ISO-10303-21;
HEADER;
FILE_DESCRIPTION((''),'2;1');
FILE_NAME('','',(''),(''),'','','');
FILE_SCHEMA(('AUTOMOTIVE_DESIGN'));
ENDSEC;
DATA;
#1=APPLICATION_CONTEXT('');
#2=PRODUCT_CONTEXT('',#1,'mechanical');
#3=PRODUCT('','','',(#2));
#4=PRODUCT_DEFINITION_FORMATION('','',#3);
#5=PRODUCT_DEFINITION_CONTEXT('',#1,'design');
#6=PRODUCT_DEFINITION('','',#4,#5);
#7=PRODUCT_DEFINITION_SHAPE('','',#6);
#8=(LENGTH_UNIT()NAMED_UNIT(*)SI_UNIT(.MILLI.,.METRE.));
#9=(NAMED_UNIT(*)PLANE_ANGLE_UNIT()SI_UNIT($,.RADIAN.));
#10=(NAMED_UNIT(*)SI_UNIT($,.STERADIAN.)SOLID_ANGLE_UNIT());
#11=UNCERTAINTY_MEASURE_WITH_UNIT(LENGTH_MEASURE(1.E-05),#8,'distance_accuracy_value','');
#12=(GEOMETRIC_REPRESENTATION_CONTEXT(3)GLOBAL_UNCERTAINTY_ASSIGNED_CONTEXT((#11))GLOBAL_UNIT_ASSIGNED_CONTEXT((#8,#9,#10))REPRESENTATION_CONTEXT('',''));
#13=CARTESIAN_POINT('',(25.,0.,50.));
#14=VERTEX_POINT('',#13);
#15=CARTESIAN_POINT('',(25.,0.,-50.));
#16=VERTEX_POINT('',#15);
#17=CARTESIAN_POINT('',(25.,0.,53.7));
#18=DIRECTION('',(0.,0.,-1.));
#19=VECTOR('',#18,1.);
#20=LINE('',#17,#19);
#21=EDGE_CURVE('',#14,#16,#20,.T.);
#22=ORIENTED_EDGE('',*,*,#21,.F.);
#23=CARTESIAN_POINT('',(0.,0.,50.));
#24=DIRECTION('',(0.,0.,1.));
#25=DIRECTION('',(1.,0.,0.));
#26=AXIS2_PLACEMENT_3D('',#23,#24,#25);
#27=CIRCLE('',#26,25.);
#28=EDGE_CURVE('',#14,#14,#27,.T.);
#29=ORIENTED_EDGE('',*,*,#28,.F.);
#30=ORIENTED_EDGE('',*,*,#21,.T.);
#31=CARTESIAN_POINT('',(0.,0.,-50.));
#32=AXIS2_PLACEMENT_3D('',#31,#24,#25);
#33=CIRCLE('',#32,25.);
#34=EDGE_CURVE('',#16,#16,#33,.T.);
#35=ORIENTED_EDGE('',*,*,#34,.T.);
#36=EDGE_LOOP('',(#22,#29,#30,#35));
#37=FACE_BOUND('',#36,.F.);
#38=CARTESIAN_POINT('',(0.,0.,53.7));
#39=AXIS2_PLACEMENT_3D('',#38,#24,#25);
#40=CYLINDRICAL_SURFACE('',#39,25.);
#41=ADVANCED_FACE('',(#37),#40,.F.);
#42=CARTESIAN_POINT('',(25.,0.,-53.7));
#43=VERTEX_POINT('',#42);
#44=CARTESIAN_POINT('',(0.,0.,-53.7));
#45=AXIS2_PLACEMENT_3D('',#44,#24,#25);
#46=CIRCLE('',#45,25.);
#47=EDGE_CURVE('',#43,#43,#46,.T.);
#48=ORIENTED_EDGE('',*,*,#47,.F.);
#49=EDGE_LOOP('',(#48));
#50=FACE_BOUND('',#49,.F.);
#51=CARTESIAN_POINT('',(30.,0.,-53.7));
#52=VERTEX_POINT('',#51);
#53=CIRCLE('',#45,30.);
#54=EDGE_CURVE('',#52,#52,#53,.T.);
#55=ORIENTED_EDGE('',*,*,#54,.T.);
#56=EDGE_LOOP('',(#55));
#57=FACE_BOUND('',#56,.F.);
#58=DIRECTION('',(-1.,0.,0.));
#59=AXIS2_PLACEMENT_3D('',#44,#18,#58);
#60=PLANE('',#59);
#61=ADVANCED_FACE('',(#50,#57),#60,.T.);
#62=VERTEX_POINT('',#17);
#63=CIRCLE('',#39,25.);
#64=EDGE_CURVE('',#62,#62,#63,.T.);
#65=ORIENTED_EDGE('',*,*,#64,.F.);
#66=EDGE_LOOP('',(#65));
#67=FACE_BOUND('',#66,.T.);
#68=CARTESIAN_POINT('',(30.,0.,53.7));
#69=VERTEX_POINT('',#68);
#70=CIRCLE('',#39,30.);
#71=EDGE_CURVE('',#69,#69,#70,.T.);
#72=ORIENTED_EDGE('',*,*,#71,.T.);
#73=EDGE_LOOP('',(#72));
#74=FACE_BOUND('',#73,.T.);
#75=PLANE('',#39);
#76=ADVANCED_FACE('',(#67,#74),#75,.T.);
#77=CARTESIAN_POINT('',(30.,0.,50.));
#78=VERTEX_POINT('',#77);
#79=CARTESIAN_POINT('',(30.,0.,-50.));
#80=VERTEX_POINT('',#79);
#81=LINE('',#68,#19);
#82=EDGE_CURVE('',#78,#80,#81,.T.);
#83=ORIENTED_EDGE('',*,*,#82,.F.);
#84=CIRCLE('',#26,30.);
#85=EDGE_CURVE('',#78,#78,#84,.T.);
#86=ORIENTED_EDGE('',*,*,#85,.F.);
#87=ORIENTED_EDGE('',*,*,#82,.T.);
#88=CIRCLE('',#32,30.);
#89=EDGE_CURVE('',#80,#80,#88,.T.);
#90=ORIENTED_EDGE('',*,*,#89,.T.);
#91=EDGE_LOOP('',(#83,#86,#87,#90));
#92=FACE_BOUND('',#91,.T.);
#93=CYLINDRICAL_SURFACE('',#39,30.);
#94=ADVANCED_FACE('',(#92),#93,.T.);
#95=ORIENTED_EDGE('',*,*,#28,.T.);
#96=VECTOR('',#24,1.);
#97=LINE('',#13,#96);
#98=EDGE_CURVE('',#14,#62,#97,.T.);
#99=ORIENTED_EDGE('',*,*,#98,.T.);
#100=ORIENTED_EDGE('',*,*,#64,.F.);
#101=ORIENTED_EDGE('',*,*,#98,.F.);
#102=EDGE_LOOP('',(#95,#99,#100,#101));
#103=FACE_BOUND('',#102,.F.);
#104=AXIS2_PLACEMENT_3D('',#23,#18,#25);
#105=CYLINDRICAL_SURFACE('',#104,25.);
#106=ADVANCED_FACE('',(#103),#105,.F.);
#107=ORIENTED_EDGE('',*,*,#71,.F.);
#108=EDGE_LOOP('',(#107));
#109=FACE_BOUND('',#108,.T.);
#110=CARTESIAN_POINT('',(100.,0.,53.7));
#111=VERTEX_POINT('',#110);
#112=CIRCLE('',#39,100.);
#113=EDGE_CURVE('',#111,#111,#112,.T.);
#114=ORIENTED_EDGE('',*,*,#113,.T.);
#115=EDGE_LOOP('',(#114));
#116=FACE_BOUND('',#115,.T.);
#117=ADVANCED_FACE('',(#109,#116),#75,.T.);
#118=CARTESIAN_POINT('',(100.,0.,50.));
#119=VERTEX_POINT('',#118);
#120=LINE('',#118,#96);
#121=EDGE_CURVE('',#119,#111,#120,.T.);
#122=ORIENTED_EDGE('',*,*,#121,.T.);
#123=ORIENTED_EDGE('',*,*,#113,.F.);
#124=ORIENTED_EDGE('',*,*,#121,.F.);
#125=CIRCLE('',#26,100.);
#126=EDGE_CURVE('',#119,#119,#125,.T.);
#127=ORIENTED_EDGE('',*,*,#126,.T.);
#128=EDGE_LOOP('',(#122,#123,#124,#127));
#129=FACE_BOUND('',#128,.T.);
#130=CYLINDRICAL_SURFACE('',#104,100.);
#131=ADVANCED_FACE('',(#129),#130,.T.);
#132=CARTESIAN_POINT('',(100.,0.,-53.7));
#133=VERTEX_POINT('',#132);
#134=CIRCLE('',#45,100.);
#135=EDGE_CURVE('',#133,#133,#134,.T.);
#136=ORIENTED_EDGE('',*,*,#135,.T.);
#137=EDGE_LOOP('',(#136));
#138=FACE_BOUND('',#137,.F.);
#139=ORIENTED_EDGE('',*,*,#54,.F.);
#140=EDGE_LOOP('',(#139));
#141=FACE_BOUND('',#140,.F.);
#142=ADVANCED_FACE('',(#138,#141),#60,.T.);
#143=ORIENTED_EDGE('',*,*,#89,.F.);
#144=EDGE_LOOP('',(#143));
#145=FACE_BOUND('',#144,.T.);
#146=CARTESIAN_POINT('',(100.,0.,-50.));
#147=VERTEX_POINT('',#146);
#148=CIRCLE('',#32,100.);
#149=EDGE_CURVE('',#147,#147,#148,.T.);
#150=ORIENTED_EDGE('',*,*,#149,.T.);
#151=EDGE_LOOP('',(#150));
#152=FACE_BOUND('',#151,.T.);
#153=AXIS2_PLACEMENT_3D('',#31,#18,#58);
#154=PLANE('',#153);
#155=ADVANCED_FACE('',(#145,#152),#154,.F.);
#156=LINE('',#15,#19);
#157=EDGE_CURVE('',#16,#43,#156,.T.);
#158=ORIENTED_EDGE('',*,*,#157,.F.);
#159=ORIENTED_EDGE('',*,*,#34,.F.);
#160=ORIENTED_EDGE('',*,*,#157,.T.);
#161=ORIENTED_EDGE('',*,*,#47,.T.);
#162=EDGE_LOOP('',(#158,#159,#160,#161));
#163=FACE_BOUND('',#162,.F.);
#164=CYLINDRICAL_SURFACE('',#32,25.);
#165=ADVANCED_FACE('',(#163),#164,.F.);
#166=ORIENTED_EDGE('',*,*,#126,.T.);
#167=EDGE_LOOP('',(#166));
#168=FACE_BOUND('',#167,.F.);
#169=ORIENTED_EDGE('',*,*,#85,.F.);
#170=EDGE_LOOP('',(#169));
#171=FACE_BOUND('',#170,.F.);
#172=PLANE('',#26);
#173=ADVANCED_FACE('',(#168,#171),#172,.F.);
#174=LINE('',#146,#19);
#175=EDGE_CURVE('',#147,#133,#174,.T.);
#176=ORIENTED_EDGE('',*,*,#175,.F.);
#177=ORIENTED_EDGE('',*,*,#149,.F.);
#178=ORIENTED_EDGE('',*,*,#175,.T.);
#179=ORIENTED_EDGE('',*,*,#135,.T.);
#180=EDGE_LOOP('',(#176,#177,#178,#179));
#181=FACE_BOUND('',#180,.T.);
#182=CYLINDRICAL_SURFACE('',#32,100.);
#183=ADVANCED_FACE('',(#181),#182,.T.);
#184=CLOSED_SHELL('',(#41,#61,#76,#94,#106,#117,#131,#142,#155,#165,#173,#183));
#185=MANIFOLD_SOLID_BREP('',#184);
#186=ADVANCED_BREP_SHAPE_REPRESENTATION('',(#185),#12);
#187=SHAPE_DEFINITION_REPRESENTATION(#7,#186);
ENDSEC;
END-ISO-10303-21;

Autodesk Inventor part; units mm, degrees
ref_plane "YZ Plane" through (0, 0, 0) normal (1, 0, 0) x (0, 1, 0)
ref_plane "XZ Plane" through (0, 0, 0) normal (0, 1, 0) x (-1, 0, 0)
ref_plane "XY Plane" through (0, 0, 0) normal (0, 0, 1) x (1, 0, 0)
sketch "Sketch1" plane through (0, 0, 0) normal (0, 0, 1) x (1, 0, 0)
  circle A0 centre (0, 0) radius 25
  circle A1 centre (0, 0) radius 100
  circle A2 centre (0, 0) radius 30
  dimension "d0" = 50
  dimension "d1" = 200
  dimension "d2" = 5
extrude "Extrusion1" add sketch "Sketch1" along normal blind 3.7 contours A1 | A2
move or copy body "Move Body1" bodies to move or copy 1 copy no translate (0, 0, 50)
mirror "Mirror1" about plane through (0, 0, 0) normal (0, 0, 1)
extrude "Extrusion2" add sketch "Sketch1" against normal up to surface (107.4 mm away) from surface at 53.7 contours A2
properties part number "roll" material "Plywood, Finish"
